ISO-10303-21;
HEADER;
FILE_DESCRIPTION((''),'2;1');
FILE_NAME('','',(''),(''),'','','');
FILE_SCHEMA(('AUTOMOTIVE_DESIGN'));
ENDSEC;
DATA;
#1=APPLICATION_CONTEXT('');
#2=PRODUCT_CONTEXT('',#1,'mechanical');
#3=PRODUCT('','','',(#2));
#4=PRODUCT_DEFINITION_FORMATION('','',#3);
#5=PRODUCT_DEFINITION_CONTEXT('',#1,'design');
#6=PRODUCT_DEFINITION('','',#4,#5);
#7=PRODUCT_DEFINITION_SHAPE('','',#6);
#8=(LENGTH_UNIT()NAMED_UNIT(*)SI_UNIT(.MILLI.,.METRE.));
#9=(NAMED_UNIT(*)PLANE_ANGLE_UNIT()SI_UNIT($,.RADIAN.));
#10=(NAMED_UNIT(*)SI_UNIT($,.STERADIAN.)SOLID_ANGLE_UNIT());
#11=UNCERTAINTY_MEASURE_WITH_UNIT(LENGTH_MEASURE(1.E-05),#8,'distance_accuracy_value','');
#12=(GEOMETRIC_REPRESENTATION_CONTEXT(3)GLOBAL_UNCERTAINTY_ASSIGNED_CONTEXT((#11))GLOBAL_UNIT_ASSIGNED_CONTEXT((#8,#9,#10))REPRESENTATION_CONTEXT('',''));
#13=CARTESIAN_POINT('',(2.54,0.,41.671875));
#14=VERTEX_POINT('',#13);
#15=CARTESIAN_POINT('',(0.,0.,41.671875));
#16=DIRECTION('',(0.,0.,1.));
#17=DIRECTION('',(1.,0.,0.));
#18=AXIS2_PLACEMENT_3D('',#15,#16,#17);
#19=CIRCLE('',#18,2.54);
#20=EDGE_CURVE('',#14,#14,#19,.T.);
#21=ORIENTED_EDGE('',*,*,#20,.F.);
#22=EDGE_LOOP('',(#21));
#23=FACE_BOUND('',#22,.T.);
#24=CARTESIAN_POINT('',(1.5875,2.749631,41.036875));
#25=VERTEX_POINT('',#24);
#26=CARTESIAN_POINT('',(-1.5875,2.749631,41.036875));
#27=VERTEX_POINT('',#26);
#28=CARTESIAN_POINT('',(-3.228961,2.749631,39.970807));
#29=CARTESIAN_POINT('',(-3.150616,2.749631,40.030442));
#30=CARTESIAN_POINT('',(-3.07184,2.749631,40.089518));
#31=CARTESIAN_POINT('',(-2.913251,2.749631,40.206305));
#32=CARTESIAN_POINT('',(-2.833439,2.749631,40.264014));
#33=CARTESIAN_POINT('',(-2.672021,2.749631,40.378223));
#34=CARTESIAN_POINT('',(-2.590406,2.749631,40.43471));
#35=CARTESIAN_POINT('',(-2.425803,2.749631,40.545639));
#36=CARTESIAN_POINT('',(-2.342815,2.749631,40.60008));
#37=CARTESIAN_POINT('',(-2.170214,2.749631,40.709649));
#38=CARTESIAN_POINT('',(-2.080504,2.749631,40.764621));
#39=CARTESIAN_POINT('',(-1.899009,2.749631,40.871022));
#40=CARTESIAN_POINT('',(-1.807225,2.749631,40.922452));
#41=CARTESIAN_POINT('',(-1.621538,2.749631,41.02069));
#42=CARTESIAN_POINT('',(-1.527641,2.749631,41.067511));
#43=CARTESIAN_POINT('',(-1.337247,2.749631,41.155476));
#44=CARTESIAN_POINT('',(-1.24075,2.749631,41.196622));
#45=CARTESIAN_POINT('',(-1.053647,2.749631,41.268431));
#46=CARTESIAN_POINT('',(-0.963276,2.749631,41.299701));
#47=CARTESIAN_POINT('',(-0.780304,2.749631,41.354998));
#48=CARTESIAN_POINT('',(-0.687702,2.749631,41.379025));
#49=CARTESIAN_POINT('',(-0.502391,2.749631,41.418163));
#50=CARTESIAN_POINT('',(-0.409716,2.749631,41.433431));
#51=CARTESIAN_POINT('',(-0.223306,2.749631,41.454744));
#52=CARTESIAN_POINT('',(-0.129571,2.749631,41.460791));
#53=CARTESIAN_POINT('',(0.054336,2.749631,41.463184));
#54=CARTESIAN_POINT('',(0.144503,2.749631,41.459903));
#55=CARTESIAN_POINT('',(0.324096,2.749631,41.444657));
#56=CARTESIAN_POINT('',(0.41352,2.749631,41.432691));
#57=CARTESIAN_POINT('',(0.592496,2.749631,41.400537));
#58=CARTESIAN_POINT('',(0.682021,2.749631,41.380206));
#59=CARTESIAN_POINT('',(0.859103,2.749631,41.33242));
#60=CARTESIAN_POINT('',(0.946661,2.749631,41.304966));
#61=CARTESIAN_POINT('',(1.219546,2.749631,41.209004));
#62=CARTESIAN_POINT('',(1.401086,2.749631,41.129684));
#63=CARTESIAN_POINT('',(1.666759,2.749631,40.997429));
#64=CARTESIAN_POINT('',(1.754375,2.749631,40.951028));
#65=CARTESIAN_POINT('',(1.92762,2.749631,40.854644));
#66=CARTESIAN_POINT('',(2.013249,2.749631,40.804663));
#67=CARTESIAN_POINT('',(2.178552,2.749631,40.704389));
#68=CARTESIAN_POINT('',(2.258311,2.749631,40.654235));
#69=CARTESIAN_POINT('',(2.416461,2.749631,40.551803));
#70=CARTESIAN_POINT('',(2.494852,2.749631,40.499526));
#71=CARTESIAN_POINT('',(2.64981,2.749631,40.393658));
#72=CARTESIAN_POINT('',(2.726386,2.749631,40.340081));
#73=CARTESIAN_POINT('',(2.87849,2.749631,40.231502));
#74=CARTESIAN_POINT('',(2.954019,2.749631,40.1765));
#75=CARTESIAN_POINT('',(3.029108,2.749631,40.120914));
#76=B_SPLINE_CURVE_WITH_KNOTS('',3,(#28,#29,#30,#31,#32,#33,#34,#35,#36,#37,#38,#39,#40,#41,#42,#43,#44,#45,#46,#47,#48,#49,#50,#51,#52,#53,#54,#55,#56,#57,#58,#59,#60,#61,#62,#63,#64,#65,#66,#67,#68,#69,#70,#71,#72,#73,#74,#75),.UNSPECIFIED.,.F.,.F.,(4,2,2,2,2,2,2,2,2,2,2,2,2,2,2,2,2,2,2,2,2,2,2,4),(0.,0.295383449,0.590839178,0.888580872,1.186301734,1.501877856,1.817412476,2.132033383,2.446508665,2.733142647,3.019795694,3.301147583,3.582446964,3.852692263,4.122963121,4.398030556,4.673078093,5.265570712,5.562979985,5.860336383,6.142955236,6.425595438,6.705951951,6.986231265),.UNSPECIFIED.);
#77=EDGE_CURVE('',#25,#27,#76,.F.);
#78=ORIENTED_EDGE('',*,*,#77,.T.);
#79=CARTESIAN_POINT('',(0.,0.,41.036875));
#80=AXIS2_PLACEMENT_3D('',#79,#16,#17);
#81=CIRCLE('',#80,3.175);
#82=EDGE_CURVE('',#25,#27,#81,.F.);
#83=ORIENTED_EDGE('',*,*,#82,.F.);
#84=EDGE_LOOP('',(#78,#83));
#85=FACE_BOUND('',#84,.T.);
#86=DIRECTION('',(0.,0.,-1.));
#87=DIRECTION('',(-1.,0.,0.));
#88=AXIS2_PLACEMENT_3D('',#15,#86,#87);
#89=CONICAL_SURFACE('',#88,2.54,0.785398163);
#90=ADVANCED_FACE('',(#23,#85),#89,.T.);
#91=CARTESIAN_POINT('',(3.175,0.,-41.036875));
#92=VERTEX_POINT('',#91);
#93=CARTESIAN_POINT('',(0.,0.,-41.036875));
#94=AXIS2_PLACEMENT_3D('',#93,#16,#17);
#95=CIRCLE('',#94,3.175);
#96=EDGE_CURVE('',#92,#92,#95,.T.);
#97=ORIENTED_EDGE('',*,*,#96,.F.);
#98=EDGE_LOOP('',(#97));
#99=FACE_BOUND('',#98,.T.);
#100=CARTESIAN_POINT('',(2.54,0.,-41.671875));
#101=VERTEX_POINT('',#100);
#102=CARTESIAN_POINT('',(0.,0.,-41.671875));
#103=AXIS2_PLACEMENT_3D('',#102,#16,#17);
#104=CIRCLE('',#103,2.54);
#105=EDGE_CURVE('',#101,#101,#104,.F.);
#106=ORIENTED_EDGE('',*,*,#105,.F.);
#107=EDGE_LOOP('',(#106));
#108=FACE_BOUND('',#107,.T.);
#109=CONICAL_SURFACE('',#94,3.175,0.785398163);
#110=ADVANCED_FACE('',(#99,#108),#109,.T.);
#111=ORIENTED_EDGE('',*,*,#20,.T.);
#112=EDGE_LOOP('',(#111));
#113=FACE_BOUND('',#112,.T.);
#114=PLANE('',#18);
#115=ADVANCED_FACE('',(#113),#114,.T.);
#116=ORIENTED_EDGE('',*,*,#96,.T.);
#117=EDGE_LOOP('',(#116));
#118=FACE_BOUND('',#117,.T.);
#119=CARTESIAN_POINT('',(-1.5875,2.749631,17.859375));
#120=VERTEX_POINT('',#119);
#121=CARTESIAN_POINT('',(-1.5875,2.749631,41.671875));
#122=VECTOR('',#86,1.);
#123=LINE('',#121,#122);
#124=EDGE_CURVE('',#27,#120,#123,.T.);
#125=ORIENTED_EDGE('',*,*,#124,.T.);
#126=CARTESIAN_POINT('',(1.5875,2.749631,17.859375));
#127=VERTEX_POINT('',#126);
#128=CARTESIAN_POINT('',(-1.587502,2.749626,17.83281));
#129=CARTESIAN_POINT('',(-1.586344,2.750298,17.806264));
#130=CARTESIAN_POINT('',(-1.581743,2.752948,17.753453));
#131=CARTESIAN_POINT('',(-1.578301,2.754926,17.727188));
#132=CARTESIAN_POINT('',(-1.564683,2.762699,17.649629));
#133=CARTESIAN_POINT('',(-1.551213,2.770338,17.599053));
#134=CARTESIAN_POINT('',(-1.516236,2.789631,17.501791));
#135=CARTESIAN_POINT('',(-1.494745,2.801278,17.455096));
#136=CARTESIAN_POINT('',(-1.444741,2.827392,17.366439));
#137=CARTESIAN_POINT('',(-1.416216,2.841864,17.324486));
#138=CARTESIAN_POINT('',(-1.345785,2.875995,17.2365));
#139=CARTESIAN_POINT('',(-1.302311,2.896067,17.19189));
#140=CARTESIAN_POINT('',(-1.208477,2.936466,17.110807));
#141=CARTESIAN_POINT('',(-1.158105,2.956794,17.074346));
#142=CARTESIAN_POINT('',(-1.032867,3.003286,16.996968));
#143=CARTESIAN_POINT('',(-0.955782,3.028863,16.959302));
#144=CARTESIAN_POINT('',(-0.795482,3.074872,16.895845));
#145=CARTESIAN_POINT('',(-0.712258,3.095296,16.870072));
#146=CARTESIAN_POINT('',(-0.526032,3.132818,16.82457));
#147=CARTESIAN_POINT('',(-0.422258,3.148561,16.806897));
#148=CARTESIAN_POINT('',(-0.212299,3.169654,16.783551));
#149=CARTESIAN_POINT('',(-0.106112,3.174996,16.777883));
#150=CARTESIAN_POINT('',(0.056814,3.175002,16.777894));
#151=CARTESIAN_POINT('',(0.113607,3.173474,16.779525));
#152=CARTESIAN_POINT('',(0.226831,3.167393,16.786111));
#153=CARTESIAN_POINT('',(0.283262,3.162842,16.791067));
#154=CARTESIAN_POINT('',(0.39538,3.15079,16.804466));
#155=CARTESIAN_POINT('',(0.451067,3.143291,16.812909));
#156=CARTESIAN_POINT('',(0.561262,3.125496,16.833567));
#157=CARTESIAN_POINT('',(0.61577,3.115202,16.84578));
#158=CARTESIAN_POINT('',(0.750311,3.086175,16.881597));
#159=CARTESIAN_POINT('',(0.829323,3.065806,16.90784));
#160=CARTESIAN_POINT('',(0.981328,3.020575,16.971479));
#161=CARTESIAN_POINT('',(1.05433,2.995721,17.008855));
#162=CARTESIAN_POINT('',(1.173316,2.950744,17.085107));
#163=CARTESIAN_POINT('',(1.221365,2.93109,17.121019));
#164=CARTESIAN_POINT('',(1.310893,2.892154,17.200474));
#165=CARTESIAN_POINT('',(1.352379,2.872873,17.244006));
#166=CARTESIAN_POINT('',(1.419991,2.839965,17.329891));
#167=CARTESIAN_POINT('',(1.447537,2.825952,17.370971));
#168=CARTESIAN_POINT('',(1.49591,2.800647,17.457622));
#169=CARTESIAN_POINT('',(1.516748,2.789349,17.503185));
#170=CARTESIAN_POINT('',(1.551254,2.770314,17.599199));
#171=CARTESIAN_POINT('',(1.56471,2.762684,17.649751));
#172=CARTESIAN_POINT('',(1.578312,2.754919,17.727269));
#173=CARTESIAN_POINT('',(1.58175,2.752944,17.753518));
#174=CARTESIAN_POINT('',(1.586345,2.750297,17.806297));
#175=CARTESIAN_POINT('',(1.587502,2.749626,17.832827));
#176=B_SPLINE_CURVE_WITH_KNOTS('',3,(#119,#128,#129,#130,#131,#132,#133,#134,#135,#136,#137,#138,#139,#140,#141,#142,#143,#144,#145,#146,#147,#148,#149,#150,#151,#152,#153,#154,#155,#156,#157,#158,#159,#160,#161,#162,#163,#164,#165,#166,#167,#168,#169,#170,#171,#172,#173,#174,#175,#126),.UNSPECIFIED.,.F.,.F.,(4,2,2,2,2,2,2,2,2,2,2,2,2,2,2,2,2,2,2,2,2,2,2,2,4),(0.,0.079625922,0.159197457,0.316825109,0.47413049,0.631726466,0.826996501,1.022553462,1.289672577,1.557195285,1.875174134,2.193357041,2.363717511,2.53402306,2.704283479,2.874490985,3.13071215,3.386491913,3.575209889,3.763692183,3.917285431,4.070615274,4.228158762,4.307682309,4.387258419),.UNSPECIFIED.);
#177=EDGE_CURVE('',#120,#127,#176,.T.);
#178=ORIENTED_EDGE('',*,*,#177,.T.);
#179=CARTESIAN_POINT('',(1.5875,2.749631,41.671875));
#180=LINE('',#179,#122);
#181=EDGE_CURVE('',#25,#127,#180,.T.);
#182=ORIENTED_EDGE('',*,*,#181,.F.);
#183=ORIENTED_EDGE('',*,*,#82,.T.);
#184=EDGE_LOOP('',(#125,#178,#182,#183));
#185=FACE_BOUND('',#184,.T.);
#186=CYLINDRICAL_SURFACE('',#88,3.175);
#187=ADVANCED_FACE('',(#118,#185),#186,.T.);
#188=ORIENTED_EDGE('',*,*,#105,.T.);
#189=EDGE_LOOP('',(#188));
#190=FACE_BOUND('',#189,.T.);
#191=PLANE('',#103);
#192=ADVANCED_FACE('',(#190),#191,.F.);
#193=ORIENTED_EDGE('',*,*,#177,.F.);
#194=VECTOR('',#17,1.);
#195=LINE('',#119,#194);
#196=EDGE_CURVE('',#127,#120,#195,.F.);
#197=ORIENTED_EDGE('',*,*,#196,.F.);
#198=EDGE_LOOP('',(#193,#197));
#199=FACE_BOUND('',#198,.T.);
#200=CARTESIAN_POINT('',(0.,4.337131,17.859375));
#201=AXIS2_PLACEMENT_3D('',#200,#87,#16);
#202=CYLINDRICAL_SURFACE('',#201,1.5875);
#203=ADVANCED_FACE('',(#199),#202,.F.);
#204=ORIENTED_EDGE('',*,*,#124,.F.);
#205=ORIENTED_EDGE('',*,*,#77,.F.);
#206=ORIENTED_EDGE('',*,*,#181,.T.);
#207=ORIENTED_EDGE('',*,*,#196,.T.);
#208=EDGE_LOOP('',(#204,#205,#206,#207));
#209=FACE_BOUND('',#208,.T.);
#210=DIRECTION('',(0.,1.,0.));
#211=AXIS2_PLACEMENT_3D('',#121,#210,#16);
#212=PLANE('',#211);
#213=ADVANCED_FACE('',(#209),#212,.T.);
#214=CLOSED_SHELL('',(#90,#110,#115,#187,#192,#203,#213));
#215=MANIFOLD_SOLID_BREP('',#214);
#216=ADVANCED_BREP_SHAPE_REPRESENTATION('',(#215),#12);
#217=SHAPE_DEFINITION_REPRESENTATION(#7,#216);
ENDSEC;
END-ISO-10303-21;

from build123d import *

# Parameters (mm, degrees)
SKETCH1_R      = 3.175
EXTRUDE1_DEPTH = 41.671875
CHAMFER1_SIZE  = 0.635
EXTRUDE7_DEPTH = 59.117462213
FILLET1_R      = 1.5875


with BuildPart() as part:
    # Sketch1 → Extrude1 (new, symmetric)
    with BuildSketch(Plane.XY):
        Circle(SKETCH1_R)
    extrude(amount=EXTRUDE1_DEPTH, both=True)

    # Chamfer1
    chamfer1_edges = [part.edges().sort_by_distance(p)[0] for p in [
        (-3.175, 0, -41.671875),
        (-3.175, 0, 41.671875),
    ]]
    chamfer(chamfer1_edges, length=CHAMFER1_SIZE)

    # Sketch13 → Extrude7 (cut, through all)
    with BuildSketch(Plane.XY.offset(16.271875)):
        with BuildLine():
            Line((-1.5875, 2.749630657), (1.5875, 2.749630657))
            ThreePointArc((1.5875, 2.749630657), (0, 3.175), (-1.5875, 2.749630657))
        make_face()
    extrude(amount=EXTRUDE7_DEPTH, mode=Mode.SUBTRACT)

    # Fillet1
    # the kernel refuses this fillet: 1.5875 mm, written as the material it adds along each edge
    with BuildSketch(Plane(origin=(-5.55625, 2.749630657, 16.271875), x_dir=(0, 0, 1), z_dir=(1, 0, 0))) as fillet1_piece_1_section:
        with BuildLine():
            CenterArc((FILLET1_R, -FILLET1_R), FILLET1_R, 90, 90)
            Line((0, -FILLET1_R), (0, 0))
            Line((0, 0), (FILLET1_R, 0))
        make_face()
    fillet1_piece_1 = extrude(amount=11.1125, mode=Mode.PRIVATE)
    fillet1_piece_1 = fillet1_piece_1 & Plane(origin=(0, 0, 16.798205884), x_dir=(1, 0, 0), z_dir=(0, 0, 1)) * Cylinder(3.175, 29, mode=Mode.PRIVATE)
    add(fillet1_piece_1)


solid = part.part
